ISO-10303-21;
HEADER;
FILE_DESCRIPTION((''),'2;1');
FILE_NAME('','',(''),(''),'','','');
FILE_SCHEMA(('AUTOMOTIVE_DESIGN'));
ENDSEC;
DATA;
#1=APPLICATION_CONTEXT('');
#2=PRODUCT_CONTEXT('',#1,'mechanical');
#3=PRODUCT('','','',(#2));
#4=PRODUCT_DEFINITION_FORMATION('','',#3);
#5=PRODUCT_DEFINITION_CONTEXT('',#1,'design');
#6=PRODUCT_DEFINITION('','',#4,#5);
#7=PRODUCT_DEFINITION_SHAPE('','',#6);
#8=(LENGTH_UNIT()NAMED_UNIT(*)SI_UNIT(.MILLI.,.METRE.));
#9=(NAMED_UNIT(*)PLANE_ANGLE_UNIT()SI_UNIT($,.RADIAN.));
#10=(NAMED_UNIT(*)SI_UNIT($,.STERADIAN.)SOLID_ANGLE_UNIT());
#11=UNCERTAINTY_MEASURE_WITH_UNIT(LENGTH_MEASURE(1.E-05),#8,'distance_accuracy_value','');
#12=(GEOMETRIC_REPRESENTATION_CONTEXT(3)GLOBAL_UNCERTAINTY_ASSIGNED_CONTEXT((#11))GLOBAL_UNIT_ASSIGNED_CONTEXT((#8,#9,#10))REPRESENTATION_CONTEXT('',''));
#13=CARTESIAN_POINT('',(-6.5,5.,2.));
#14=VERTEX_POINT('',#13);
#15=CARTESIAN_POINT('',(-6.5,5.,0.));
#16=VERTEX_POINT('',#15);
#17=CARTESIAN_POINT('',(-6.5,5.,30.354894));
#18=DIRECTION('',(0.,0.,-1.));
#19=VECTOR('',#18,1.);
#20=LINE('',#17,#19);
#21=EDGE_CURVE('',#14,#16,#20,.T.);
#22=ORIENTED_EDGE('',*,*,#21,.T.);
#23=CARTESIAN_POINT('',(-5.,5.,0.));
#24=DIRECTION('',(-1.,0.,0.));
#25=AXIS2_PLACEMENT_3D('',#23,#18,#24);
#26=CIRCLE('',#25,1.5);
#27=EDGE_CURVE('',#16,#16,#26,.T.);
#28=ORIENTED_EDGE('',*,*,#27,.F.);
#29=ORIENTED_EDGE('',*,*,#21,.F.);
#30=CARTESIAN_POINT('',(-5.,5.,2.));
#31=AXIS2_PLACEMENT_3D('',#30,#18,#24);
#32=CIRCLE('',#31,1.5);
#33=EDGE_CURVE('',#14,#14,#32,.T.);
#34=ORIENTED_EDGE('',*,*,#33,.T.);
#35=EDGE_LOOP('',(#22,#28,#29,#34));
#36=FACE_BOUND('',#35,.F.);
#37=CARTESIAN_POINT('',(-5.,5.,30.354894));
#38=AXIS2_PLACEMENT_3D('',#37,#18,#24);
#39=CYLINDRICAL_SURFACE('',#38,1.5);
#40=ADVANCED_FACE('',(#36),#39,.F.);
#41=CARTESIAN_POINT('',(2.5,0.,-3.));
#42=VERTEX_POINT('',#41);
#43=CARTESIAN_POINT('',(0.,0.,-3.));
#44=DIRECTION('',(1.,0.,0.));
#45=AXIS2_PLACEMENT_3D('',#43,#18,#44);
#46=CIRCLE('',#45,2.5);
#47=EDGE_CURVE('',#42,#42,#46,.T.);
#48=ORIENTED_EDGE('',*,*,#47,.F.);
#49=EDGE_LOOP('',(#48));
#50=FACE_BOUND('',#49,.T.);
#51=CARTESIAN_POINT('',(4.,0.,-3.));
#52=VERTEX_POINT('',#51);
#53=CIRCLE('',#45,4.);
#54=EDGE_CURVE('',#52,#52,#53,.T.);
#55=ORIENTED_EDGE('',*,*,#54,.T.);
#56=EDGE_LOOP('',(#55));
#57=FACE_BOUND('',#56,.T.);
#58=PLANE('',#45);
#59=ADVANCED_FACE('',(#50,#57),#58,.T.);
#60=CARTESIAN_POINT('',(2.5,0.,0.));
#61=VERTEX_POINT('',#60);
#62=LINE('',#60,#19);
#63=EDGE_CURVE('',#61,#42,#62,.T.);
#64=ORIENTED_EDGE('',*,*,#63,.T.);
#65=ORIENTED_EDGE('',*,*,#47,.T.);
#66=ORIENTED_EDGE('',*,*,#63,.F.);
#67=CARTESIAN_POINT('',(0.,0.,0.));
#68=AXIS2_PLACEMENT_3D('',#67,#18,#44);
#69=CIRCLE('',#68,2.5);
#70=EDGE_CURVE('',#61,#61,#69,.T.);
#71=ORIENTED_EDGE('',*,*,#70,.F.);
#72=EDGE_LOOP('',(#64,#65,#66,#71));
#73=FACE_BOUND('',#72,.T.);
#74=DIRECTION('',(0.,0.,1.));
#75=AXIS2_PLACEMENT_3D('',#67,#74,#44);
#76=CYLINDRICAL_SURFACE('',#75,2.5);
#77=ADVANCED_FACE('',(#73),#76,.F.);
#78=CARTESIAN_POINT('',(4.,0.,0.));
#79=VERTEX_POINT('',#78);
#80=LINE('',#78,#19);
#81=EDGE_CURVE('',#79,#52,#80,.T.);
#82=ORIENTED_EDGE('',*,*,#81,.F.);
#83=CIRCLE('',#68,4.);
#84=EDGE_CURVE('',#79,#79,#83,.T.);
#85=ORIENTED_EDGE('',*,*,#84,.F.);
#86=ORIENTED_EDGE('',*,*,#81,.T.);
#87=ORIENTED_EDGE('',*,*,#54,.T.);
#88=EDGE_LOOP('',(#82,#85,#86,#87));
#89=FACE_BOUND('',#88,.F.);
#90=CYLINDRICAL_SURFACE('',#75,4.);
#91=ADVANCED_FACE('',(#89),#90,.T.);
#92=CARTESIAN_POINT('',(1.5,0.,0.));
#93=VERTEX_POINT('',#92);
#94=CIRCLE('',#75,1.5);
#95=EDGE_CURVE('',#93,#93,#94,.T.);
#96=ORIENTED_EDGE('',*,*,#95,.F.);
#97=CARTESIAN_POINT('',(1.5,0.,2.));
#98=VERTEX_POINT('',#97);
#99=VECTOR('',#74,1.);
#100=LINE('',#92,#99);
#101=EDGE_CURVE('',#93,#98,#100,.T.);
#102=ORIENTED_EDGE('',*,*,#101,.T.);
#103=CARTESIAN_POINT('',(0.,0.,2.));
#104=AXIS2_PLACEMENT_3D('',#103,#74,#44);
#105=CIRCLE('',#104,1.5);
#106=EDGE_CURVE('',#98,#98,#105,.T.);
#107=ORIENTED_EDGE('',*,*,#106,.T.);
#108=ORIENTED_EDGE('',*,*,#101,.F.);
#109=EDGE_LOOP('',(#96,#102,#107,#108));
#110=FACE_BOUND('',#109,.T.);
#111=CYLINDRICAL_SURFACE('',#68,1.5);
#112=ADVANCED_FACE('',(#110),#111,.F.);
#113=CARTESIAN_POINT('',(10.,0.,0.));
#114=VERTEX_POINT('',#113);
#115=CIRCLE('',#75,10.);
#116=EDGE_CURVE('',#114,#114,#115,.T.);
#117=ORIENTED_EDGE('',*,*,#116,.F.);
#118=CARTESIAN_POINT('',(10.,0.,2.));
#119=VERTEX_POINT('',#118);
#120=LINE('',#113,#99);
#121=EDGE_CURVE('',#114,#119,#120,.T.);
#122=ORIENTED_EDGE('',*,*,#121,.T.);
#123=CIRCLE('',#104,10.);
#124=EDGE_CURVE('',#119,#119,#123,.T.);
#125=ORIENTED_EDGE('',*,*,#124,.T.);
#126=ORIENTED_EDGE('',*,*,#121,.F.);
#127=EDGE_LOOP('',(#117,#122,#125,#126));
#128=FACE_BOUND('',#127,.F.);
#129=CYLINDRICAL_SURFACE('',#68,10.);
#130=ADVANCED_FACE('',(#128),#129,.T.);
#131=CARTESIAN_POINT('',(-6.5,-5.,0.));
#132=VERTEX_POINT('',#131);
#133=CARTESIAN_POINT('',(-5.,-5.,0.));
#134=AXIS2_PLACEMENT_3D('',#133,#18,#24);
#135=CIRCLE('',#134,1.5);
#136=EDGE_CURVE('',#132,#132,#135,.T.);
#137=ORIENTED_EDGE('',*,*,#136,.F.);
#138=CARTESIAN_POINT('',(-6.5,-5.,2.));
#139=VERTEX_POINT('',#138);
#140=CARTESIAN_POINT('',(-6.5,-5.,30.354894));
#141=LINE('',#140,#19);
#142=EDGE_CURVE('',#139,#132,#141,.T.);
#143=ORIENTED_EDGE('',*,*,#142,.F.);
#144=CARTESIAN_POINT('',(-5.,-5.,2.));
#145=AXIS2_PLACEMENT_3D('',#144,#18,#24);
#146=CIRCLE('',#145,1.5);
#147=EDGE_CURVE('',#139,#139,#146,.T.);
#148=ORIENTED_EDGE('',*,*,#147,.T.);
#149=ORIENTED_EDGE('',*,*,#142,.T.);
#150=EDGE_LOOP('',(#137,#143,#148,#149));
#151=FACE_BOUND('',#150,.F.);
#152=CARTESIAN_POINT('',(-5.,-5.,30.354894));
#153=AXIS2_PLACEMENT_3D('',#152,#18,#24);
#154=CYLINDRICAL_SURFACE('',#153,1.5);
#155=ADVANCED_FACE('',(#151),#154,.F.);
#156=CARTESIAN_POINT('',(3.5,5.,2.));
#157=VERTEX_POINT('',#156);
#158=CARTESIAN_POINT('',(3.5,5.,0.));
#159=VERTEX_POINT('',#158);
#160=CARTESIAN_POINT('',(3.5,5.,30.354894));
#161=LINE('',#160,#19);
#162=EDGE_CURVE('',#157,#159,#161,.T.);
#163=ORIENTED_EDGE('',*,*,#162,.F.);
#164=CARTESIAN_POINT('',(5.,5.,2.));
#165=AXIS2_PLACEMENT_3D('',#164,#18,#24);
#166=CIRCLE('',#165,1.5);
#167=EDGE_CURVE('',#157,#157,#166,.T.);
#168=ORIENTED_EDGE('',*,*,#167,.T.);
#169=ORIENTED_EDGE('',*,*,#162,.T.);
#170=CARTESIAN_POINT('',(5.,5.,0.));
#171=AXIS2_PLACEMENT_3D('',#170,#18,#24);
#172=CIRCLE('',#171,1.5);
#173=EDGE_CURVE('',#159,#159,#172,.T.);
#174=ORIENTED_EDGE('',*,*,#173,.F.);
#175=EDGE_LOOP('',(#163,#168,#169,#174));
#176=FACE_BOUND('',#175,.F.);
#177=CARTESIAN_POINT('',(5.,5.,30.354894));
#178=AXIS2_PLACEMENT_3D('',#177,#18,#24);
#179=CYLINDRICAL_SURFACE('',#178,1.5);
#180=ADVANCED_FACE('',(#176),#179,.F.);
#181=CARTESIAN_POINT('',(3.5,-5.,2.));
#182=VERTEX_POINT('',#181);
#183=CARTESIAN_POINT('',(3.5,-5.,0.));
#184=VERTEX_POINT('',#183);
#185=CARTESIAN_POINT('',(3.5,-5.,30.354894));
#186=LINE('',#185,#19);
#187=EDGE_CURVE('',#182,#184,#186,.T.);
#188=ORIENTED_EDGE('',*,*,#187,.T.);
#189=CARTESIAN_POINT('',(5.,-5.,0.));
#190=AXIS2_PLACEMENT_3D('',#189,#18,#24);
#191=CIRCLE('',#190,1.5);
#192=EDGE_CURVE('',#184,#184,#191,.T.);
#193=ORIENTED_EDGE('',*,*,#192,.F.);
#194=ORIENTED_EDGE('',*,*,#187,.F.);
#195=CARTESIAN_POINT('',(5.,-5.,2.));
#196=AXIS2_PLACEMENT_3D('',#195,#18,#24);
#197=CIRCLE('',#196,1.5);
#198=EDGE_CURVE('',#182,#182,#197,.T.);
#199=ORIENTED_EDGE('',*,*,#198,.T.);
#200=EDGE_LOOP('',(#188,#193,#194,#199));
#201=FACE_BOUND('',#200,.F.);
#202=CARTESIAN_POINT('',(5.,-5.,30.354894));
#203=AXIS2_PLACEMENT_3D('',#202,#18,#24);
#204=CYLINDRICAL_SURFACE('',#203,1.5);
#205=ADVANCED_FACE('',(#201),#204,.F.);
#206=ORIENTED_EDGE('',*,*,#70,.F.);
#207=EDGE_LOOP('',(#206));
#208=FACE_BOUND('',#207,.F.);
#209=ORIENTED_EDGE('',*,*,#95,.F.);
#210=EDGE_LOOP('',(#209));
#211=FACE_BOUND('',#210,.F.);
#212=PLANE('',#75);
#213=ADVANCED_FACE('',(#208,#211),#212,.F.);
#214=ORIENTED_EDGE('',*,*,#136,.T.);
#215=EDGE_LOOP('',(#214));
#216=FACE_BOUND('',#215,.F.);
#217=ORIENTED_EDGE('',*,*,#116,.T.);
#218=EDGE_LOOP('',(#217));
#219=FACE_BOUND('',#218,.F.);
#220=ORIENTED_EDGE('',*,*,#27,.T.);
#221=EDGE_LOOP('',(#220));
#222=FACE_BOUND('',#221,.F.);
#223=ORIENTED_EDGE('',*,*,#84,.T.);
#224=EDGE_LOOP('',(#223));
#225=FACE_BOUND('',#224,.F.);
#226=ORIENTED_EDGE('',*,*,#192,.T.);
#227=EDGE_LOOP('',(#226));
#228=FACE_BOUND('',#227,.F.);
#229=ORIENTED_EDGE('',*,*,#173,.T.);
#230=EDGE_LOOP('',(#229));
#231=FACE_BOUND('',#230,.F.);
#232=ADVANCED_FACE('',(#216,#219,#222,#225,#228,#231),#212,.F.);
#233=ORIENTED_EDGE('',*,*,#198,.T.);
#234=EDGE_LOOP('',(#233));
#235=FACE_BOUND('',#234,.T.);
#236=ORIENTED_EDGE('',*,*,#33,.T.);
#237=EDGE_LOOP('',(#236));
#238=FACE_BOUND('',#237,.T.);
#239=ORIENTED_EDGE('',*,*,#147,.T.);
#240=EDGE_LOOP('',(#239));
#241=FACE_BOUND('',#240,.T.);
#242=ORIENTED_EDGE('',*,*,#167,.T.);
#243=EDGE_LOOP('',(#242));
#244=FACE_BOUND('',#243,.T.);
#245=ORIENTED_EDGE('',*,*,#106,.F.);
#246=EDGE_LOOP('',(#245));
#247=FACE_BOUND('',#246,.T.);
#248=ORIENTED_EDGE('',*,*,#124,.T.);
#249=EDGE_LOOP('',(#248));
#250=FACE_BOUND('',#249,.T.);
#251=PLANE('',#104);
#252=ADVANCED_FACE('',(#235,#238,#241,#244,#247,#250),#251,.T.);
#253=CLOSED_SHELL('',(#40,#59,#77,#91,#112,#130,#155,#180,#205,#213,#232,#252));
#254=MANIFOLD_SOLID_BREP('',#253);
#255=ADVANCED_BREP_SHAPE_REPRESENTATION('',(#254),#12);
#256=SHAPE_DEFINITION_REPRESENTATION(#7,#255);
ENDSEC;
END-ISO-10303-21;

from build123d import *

# Parameters (mm, degrees)
F0_R     = 10
F0_R_2   = 1.5
F1_DEPTH = 2
F3_D     = 3
F4_R     = 4
F4_R_2   = 2.5
F5_DEPTH = 3


# Not quite as in the source:
# - a feature names something its author has since deleted; it is built from what else it names


with BuildPart() as f1:
    # F0 (on Top) → F1 (new body)
    with BuildSketch(Plane.XY):
        Circle(F0_R)
        Circle(F0_R_2, mode=Mode.SUBTRACT)
    extrude(amount=F1_DEPTH)

    # F3 (through all)
    with Locations(Plane.XY.offset(2)):
        with Locations((-5, 5), (5, 5), (5, -5), (-5, -5)):
            Hole(F3_D / 2)

    # F4 (on face) → F5 (join)
    with BuildSketch(Plane(origin=(0, 0, 0), x_dir=(1, 0, 0), z_dir=(0, 0, -1))):
        Circle(F4_R)
        Circle(F4_R_2, mode=Mode.SUBTRACT)
    extrude(amount=F5_DEPTH)


solid = f1.part
